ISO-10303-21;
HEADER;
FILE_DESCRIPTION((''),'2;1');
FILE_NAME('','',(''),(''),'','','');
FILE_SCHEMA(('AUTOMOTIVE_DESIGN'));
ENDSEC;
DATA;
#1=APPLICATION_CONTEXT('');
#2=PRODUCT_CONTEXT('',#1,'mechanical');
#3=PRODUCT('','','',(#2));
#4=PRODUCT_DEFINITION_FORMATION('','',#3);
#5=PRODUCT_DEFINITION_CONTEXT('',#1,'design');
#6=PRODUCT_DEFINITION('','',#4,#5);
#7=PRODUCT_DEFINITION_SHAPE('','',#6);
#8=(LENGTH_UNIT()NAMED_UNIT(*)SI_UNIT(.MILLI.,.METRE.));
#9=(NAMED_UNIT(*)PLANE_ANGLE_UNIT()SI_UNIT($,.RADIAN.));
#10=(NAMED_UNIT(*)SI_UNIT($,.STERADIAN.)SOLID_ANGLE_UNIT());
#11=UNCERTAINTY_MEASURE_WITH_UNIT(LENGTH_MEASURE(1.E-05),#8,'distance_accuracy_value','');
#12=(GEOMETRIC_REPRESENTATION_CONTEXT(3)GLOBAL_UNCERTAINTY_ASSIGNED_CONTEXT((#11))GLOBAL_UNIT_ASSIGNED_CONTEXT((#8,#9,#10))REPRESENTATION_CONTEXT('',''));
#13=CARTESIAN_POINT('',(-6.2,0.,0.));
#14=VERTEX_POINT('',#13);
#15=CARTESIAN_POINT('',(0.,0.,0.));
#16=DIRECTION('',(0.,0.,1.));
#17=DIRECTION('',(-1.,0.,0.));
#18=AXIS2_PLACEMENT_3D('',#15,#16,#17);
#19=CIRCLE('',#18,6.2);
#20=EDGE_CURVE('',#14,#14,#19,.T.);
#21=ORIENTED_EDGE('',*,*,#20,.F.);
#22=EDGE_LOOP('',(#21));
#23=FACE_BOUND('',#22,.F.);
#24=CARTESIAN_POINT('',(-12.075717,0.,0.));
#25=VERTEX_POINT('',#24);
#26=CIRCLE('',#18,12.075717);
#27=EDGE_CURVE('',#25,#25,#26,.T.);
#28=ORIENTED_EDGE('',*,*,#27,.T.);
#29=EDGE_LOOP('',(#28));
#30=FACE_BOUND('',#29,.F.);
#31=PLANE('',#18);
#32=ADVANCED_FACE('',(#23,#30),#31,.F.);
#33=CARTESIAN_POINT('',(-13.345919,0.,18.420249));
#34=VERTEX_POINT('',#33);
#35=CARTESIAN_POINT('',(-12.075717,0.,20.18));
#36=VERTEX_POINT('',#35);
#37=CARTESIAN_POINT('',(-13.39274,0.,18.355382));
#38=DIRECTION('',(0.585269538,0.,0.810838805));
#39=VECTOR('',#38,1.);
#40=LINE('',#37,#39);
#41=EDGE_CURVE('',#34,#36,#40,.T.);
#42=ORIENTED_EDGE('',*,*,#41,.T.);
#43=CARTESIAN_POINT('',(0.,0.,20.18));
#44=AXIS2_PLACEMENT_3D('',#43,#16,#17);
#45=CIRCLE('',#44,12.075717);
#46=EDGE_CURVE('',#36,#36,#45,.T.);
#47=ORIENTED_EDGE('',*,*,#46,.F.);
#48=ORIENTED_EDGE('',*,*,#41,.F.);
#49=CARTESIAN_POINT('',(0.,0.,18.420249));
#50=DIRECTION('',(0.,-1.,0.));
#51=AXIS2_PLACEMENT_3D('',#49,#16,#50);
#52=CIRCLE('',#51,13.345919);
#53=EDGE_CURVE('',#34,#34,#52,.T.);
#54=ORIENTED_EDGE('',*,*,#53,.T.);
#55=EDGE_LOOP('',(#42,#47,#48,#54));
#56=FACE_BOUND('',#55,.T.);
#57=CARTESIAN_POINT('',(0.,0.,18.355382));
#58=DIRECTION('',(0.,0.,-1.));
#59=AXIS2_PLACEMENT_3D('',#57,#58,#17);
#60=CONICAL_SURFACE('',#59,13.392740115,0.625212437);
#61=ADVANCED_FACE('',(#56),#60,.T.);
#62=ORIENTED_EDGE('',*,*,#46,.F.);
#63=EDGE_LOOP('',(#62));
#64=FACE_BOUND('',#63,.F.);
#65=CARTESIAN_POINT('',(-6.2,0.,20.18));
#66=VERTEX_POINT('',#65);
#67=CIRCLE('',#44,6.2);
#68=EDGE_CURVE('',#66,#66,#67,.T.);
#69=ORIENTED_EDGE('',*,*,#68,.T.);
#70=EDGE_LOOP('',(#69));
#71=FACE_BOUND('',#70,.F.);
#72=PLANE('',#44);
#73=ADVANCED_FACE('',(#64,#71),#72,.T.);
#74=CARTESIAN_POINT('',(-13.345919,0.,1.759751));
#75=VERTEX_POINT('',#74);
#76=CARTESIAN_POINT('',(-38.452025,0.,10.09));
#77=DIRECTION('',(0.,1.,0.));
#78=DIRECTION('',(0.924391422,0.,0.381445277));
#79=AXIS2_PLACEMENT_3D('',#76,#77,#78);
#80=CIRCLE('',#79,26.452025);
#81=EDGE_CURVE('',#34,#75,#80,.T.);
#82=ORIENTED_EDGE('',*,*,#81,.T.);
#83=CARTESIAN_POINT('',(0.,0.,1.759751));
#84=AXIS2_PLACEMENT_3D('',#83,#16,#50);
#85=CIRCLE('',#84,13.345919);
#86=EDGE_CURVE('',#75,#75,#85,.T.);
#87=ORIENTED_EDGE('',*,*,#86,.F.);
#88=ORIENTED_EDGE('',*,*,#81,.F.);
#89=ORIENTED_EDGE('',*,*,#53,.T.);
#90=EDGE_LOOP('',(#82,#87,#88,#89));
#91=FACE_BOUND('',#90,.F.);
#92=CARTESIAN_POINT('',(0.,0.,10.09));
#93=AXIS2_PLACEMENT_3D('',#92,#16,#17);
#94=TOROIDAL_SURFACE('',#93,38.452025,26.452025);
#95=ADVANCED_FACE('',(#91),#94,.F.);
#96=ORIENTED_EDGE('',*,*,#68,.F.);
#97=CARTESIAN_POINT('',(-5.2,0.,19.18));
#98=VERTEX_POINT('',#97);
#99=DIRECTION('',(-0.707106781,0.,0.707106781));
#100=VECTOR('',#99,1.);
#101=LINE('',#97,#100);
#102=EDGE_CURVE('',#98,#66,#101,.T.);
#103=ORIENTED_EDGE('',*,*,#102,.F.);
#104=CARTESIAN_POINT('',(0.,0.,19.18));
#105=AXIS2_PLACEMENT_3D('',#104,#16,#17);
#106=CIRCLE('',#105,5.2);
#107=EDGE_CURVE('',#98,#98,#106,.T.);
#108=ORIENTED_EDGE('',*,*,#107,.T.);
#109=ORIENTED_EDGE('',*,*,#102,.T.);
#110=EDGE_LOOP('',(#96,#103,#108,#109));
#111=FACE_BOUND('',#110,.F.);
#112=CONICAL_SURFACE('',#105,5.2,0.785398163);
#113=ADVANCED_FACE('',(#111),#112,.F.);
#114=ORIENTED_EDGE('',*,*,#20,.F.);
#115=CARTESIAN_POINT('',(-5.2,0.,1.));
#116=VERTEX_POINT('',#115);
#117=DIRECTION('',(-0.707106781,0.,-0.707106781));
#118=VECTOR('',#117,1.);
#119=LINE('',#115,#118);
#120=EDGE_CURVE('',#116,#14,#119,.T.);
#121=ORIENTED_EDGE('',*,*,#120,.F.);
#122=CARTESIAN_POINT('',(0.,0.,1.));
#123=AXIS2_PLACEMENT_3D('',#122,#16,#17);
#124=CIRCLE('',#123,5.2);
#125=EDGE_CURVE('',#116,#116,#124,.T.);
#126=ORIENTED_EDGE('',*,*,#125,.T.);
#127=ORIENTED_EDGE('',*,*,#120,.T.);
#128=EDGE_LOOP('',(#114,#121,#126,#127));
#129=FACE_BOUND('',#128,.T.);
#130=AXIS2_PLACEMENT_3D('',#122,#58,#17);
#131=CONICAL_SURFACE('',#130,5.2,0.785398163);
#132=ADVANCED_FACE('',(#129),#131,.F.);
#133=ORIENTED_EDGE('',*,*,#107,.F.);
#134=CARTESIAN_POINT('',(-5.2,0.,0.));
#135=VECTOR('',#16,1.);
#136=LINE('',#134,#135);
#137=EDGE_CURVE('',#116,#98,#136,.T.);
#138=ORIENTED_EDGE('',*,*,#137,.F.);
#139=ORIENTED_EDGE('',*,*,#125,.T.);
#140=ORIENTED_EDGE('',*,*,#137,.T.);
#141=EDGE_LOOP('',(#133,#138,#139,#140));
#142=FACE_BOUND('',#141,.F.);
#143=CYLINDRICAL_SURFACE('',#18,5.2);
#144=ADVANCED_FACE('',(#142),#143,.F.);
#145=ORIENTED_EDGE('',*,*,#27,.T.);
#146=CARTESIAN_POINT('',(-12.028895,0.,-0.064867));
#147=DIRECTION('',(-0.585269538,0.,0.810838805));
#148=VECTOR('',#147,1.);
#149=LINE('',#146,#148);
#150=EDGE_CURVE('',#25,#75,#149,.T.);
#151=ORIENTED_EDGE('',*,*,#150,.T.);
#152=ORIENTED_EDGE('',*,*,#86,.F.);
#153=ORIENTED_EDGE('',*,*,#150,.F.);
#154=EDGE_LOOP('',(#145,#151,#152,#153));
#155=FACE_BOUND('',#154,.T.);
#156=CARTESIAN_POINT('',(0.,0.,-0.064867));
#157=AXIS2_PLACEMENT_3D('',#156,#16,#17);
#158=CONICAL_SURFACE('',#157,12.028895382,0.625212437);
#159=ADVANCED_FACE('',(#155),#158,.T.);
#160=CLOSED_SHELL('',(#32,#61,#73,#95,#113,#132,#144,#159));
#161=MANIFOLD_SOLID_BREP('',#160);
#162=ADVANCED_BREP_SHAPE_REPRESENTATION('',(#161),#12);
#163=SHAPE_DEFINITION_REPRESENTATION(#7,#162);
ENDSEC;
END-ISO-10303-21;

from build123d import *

# Parameters (mm, degrees)
F2_SIZE = 1


# Not quite as in the source:
# - a fillet or chamfer that OpenCascade refuses, or shapes differently, is made with other operations: its cross-section is extruded or revolved along the edge and cut away or added


with BuildPart() as f1:
    # F0 (on Front) → F1 (revolve)
    with BuildSketch(Plane.XZ):
        with BuildLine():
            Line((-5.2, 0), (-5.2, 20.18))
            Line((-5.2, 20.18), (-14, 20.18))
            ThreePointArc((-14, 20.18), (-12, 10.09), (-14, 0))
            Line((-14, 0), (-5.2, 0))
        make_face()
    revolve(axis=Axis((0, 0, 10.09), (0, 0, 1)))

    # F2
    f2_edges = [f1.edges().sort_by_distance(p)[0] for p in [
        (5.2, 0, 0),
        (5.2, 0, 20.18),
        (-5.2, 0, 10.09),
    ]]
    chamfer(f2_edges, length=F2_SIZE)

    # F3: chamfer of 2 on 3 edges, made by hand

    # F3_s1 → F3_t2 (revolve, cut)
    with BuildSketch(Plane.XZ):
        with BuildLine():
            Line((-13.3927401151, 18.3553817289), (-12.0288953822, 20.2448671044))
            Line((-12.0288953822, 20.2448671044), (-12.0288953822, 20.2848671044))
            ThreePointArc((-12.0288953822, 20.2848671044), (-13.0144476911, 20.22), (-14, 20.22))
            Line((-14, 20.22), (-14.0369756569, 20.1647421889))
            ThreePointArc((-14.0369756569, 20.1647421889), (-13.6870919943, 19.2711305309), (-13.4307048554, 18.3427849635))
            Line((-13.4307048554, 18.3427849635), (-13.3927401151, 18.3553817289))
        make_face()
    revolve(axis=Axis((0, 0, 20.18), (0, 0, 1)), mode=Mode.SUBTRACT)

    # F3_s3 → F3_t4 (revolve, cut)
    with BuildSketch(Plane.XZ):
        with BuildLine():
            Line((-12.0288953822, -0.0648671044), (-13.3927401151, 1.8246182711))
            Line((-13.3927401151, 1.8246182711), (-13.4307048554, 1.8372150365))
            ThreePointArc((-13.4307048554, 1.8372150365), (-13.6870919943, 0.9088694691), (-14.0369756569, 0.0152578111))
            Line((-14.0369756569, 0.0152578111), (-14, -0.04))
            ThreePointArc((-14, -0.04), (-13.0144476911, -0.04), (-12.0288953822, -0.1048671044))
            Line((-12.0288953822, -0.1048671044), (-12.0288953822, -0.0648671044))
        make_face()
    revolve(axis=Axis((0, 0, 0), (0, 0, 1)), mode=Mode.SUBTRACT)


solid = f1.part
